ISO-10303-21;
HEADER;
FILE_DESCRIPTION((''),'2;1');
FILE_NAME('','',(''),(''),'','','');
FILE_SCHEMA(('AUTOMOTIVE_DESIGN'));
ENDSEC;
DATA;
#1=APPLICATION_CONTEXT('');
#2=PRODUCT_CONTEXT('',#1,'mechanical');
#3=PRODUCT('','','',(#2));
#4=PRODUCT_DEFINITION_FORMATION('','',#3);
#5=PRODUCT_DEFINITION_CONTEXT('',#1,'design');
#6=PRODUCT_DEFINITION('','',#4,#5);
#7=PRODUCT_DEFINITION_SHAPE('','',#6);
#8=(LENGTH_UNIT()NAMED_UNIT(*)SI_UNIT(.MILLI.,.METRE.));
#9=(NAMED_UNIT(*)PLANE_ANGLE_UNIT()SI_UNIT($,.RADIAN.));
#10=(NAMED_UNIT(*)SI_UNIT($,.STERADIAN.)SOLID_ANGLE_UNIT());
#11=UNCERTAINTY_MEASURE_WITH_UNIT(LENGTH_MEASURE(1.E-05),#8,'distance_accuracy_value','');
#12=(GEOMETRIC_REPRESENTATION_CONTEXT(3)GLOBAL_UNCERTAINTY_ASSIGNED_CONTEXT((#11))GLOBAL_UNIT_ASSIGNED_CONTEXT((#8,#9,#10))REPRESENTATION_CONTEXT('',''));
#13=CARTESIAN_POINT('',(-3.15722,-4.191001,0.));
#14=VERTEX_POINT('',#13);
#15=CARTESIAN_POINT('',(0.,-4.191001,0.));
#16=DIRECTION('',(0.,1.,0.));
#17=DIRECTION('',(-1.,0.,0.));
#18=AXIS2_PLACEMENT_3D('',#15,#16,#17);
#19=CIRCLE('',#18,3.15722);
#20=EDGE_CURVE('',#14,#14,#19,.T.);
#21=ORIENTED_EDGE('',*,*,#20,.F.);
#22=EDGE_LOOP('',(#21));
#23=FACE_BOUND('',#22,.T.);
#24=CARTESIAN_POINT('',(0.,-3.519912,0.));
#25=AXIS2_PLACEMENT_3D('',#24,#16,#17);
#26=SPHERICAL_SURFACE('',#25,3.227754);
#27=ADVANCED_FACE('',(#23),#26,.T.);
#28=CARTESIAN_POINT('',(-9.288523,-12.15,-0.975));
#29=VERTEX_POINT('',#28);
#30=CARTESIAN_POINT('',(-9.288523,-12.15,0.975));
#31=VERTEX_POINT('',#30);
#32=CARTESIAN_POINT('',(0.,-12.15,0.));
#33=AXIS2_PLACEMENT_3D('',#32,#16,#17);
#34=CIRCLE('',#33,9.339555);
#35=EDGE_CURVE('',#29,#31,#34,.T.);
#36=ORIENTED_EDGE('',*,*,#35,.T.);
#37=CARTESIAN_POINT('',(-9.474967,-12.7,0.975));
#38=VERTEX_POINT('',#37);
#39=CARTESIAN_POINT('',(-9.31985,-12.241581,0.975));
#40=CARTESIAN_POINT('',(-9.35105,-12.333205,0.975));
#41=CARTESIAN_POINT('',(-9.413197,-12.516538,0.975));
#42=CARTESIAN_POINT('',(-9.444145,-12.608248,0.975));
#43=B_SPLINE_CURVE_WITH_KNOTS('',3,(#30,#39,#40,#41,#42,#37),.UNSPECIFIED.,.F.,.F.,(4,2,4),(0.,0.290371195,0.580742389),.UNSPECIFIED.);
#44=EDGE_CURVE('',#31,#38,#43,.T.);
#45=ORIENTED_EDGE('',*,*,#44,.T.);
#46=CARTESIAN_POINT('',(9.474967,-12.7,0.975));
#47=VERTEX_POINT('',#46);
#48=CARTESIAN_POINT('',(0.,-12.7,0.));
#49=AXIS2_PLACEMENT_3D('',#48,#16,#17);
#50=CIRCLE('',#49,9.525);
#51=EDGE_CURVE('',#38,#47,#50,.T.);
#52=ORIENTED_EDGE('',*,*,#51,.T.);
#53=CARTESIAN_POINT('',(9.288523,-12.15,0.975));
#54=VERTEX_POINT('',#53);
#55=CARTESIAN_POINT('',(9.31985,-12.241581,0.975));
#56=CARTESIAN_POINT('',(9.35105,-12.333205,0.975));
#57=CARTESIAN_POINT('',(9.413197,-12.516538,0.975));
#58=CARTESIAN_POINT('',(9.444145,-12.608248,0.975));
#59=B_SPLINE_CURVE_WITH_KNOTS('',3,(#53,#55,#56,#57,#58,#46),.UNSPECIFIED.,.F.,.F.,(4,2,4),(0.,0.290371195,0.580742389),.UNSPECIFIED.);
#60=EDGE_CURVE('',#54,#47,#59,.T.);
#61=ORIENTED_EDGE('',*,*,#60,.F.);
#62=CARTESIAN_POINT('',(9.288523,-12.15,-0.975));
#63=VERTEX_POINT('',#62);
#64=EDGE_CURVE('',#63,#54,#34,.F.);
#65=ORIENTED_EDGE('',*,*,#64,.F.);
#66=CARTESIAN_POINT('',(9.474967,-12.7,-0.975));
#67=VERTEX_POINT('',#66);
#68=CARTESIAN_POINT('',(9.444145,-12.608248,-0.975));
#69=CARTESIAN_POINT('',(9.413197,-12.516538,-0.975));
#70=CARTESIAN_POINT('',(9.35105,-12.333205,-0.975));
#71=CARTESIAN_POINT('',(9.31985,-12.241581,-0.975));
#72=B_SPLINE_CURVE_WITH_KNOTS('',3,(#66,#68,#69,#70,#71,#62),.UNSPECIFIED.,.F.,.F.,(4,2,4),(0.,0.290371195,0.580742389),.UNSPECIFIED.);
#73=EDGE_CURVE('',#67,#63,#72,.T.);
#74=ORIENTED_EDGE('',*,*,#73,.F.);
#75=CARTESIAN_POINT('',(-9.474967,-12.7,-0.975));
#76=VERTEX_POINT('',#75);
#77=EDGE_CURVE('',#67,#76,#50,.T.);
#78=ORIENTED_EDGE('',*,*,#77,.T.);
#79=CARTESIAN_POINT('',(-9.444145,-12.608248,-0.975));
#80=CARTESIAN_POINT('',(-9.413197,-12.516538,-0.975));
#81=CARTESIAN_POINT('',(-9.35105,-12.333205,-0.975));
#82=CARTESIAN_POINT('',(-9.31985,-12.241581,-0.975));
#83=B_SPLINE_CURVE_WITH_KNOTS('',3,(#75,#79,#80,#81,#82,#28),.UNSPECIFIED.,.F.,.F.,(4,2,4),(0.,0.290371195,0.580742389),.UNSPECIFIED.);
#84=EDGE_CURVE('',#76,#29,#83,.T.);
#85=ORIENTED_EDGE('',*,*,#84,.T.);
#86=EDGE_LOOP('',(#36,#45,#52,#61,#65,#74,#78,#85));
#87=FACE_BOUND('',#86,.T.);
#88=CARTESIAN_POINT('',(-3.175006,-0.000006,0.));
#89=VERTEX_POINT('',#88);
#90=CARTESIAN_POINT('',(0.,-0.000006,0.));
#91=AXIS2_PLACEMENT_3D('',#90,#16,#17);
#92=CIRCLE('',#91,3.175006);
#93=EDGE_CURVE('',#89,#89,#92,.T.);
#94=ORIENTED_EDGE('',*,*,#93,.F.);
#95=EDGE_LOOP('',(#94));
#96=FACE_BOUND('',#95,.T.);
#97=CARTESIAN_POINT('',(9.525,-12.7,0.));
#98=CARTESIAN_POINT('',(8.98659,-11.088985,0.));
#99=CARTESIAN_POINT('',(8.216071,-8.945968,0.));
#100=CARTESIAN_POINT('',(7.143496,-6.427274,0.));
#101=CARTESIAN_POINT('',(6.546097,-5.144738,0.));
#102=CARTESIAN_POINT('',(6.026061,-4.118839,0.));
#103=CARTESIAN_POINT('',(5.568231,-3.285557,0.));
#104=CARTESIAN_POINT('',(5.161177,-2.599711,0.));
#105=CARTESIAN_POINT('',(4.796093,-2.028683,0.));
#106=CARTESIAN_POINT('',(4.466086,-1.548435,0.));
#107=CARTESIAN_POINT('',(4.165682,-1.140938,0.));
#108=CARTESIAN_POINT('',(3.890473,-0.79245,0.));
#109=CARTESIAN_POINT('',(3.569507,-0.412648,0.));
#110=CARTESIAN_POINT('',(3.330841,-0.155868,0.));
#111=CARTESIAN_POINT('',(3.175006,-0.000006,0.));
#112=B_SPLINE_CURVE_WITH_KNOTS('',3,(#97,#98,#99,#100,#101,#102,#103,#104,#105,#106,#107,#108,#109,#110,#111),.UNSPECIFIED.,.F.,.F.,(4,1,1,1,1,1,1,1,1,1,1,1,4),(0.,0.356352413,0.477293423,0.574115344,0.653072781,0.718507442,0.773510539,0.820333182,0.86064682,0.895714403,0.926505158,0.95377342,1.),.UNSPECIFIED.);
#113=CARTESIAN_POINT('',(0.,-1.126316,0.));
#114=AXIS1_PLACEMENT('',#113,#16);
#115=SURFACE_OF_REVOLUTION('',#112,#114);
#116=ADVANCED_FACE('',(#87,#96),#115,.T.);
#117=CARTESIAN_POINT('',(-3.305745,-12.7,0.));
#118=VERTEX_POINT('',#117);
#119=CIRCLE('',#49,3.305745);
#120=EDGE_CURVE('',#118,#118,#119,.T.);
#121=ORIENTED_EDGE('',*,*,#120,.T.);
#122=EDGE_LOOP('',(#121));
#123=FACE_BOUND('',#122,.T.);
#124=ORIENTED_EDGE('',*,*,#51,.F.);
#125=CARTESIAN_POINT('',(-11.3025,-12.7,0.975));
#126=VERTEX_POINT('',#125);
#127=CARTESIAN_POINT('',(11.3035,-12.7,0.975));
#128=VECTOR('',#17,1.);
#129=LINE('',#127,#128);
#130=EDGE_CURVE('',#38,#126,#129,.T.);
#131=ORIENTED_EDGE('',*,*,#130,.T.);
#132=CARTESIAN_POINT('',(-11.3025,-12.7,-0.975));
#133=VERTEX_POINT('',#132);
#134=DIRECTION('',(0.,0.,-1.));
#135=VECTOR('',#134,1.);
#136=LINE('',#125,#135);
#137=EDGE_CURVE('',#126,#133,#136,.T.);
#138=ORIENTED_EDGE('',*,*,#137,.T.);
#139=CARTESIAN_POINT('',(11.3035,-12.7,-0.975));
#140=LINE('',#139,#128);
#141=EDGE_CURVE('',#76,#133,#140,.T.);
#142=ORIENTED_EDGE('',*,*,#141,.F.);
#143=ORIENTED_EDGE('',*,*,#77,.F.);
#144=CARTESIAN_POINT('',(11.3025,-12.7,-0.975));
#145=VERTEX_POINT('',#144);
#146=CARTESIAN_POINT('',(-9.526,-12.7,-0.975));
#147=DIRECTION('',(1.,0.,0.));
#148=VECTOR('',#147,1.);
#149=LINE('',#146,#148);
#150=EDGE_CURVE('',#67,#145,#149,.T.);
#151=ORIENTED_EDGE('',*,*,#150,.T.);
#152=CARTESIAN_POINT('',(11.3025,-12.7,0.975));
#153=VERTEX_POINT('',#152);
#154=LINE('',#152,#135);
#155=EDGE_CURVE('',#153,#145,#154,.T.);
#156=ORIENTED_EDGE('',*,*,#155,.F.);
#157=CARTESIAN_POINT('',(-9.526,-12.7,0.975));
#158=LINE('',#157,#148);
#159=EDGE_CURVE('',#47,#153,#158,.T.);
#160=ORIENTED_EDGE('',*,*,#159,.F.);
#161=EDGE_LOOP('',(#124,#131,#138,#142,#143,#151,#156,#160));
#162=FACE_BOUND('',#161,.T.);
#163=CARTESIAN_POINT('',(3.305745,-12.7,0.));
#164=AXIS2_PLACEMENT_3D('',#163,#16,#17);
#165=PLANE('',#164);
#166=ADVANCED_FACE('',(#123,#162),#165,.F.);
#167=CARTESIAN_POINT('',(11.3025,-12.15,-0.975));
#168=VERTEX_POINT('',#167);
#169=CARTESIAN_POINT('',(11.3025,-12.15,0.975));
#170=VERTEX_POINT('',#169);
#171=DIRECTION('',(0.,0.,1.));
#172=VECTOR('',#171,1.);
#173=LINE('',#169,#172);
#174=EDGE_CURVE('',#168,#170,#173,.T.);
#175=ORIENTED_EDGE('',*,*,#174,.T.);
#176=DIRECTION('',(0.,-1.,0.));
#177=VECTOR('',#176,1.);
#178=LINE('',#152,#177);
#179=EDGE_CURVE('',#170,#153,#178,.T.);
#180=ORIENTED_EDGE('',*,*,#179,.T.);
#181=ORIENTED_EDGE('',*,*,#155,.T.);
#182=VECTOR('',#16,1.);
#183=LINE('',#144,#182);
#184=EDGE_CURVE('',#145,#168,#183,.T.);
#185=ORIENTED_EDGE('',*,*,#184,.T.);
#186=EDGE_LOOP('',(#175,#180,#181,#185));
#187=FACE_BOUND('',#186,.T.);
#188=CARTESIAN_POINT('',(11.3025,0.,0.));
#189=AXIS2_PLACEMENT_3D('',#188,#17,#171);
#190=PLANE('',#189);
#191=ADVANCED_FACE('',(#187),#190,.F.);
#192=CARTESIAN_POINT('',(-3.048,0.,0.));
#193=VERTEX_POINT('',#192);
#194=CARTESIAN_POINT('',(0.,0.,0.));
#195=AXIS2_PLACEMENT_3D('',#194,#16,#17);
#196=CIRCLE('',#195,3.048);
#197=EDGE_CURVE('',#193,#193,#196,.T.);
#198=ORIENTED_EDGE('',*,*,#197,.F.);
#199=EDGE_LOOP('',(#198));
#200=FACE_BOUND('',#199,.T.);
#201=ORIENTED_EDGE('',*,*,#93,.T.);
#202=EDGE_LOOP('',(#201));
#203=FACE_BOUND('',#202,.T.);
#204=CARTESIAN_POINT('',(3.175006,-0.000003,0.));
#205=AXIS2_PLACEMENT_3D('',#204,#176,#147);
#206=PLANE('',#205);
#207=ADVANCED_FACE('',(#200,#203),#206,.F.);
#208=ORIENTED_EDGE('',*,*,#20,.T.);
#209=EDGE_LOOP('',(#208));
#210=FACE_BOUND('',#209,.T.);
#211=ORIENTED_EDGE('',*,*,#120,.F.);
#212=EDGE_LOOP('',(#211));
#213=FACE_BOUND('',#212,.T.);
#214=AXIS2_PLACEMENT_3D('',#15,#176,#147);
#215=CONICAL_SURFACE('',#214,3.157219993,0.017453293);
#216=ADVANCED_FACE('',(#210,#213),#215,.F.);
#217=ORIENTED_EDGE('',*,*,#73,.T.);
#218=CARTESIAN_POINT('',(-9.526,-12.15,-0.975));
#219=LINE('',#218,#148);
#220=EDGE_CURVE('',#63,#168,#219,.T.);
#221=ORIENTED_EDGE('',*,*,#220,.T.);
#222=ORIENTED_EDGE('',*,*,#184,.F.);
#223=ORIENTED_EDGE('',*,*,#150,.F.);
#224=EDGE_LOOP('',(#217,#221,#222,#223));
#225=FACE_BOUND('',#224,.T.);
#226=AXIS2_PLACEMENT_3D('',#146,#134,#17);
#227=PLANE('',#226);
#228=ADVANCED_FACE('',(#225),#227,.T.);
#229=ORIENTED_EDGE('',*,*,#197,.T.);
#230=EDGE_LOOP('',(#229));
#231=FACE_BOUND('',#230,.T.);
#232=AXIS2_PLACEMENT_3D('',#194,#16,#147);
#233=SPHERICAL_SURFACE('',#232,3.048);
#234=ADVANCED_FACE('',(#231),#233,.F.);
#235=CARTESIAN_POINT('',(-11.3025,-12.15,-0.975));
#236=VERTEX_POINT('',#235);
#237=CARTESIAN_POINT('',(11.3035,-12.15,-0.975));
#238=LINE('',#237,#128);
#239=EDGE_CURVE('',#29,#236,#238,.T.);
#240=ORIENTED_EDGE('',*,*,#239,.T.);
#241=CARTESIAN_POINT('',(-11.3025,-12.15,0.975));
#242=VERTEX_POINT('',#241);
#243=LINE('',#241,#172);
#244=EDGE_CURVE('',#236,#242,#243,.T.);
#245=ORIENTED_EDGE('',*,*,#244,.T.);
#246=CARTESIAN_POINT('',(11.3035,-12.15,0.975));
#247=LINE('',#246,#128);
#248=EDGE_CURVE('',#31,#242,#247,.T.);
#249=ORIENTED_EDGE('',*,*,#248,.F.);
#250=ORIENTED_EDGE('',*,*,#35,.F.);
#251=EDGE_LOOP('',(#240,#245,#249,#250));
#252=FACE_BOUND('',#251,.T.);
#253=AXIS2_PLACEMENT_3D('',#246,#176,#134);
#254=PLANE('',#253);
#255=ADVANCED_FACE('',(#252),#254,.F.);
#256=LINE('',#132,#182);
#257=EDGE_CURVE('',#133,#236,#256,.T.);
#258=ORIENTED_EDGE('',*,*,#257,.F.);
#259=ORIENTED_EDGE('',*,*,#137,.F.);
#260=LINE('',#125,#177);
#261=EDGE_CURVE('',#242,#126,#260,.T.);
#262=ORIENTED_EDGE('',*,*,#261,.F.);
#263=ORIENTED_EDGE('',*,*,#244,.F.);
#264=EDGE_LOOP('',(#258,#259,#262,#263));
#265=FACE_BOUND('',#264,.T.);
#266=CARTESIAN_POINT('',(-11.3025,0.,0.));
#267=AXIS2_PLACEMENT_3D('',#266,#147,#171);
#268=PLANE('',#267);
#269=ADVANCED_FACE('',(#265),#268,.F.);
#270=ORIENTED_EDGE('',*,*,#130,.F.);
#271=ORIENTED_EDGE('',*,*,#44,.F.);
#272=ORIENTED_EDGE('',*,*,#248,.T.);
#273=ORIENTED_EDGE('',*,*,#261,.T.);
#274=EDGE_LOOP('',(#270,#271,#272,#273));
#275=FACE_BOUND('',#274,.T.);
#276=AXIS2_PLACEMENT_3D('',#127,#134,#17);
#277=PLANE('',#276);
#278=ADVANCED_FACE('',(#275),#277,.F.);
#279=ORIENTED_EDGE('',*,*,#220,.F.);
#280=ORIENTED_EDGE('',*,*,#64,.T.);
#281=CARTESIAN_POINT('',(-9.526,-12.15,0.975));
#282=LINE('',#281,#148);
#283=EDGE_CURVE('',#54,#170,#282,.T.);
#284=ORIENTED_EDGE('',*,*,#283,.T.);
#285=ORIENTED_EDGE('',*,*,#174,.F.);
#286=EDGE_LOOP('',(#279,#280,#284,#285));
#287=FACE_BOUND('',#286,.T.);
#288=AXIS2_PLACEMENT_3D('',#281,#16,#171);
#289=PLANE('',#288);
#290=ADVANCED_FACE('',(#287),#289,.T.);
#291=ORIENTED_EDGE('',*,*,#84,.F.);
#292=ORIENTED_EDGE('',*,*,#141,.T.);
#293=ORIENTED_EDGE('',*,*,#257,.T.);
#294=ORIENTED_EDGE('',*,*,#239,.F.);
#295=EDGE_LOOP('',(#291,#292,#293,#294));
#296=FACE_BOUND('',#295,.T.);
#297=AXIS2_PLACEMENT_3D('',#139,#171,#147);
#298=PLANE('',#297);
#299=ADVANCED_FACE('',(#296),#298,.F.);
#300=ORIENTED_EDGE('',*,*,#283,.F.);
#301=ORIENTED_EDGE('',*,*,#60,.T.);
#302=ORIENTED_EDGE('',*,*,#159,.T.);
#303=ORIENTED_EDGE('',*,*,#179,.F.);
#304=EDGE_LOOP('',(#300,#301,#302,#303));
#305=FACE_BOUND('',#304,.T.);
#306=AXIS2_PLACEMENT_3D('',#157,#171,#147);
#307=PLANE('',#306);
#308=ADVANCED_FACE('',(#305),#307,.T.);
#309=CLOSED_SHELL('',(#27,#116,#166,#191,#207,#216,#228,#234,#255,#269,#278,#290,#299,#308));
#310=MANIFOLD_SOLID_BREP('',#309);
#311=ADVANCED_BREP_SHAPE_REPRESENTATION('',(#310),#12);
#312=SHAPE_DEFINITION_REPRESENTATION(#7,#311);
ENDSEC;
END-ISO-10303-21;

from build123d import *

# Parameters (mm, degrees)
BOSS_EXTRUDE1_REACH = 28.188
SKETCH6_W           = 1.95
SKETCH6_H           = 0.55


# Read off the part's stored shape, not the designer's step: Revolve1
with BuildPart() as part:
    # Revolve1 outline → Revolve1 (revolve)
    with BuildSketch(Plane.XY):
        with BuildLine():
            Line((0, -3.048000121), (0, -6.747666043))
            ThreePointArc((0, -6.747666043), (2.031291213, -6.02834824), (3.157219843, -4.191000475))
            Line((3.157219843, -4.191000475), (3.175005592, -5.209936836))
            Line((3.175005592, -5.209936836), (3.175005592, -3.048000121))
            Line((3.175005592, -3.048000121), (0, -3.048000121))
        make_face()
        with BuildLine():
            ThreePointArc((3.047999762, -2.63e-07), (2.155261335, -2.155261626), (0, -3.048000121))
            Line((0, -3.048000121), (3.175005592, -3.048000121))
            Line((3.175005592, -3.048000121), (3.175005592, -2.63e-07))
            Line((3.175005592, -2.63e-07), (3.047999762, -2.63e-07))
        make_face()
        with BuildLine():
            Line((3.175005592, -3.048000121), (3.175005592, -5.209936836))
            Line((3.175005592, -5.209936836), (3.201846755, -6.747666043))
            Line((3.201846755, -6.747666043), (7.27518656, -6.747666043))
            add(Edge.make_bspline(
                [(7.27518656, -6.747666043), (7.21368894, -6.606752773), (6.964928048, -6.043911737), (6.546096871, -5.144737962), (6.026061135, -4.11883899), (5.658022957, -3.448984329), (5.463723236, -3.113412693), (5.425444316, -3.048000121)],
                knots=[0.445044946, 0.445044946, 0.445044946, 0.445044946, 0.477293423, 0.574115344, 0.653072781, 0.718507442, 0.734404118, 0.734404118, 0.734404118, 0.734404118], degree=3))
            Line((5.425444316, -3.048000121), (3.175005592, -3.048000121))
        make_face()
        with BuildLine():
            Line((3.175005592, -5.539e-06), (3.175005592, -3.048000121))
            Line((3.175005592, -3.048000121), (5.425444316, -3.048000121))
            add(Edge.make_bspline(
                [(5.425444316, -3.048000121), (5.331276728, -2.887082722), (5.120346092, -2.535848114), (4.796092557, -2.028683173), (4.466086303, -1.548435358), (4.165682257, -1.140937859), (3.890472725, -0.792449825), (3.569506506, -0.412648033), (3.330841371, -0.155867529), (3.175005592, -5.539e-06)],
                knots=[0.734404118, 0.734404118, 0.734404118, 0.734404118, 0.773510539, 0.820333182, 0.86064682, 0.895714403, 0.926505158, 0.95377342, 1, 1, 1, 1], degree=3))
        make_face()
        with BuildLine():
            Line((7.27518656, -6.747666043), (3.201846755, -6.747666043))
            Line((3.201846755, -6.747666043), (3.30574513, -12.7))
            Line((3.30574513, -12.7), (9.524999537, -12.7))
            add(Edge.make_bspline(
                [(9.524999537, -12.7), (8.986589512, -11.088985259), (8.268131113, -9.090761172), (7.444322602, -7.135217838), (7.27518656, -6.747666043)],
                knots=[0, 0, 0, 0, 0.356352413, 0.445044946, 0.445044946, 0.445044946, 0.445044946], degree=3))
        make_face()
    revolve(axis=Axis((0, 0, 0), (0, 1, 0)))

    # Sketch6 → Boss-Extrude1 (add, up to next)
    with BuildSketch(Plane(origin=(11.3025, 0, 0), x_dir=(0, 0, -1), z_dir=(1, 0, 0)), mode=Mode.PRIVATE) as boss_extrude1_sk1:
        with Locations((0, -12.425)):
            Rectangle(SKETCH6_W, SKETCH6_H)
    boss_extrude1_tool1 = extrude(boss_extrude1_sk1.sketch, amount=-BOSS_EXTRUDE1_REACH, mode=Mode.PRIVATE) - part.part
    boss_extrude1 = boss_extrude1_tool1.solids().sort_by_distance((11.3025, -12.425, 0))[0]
    add(boss_extrude1)

    # Mirror1: Boss-Extrude1 across plane
    add(boss_extrude1.mirror(Plane(origin=(0, 0, 0), x_dir=(0, 0, 1), z_dir=(1, 0, 0))))


solid = part.part
